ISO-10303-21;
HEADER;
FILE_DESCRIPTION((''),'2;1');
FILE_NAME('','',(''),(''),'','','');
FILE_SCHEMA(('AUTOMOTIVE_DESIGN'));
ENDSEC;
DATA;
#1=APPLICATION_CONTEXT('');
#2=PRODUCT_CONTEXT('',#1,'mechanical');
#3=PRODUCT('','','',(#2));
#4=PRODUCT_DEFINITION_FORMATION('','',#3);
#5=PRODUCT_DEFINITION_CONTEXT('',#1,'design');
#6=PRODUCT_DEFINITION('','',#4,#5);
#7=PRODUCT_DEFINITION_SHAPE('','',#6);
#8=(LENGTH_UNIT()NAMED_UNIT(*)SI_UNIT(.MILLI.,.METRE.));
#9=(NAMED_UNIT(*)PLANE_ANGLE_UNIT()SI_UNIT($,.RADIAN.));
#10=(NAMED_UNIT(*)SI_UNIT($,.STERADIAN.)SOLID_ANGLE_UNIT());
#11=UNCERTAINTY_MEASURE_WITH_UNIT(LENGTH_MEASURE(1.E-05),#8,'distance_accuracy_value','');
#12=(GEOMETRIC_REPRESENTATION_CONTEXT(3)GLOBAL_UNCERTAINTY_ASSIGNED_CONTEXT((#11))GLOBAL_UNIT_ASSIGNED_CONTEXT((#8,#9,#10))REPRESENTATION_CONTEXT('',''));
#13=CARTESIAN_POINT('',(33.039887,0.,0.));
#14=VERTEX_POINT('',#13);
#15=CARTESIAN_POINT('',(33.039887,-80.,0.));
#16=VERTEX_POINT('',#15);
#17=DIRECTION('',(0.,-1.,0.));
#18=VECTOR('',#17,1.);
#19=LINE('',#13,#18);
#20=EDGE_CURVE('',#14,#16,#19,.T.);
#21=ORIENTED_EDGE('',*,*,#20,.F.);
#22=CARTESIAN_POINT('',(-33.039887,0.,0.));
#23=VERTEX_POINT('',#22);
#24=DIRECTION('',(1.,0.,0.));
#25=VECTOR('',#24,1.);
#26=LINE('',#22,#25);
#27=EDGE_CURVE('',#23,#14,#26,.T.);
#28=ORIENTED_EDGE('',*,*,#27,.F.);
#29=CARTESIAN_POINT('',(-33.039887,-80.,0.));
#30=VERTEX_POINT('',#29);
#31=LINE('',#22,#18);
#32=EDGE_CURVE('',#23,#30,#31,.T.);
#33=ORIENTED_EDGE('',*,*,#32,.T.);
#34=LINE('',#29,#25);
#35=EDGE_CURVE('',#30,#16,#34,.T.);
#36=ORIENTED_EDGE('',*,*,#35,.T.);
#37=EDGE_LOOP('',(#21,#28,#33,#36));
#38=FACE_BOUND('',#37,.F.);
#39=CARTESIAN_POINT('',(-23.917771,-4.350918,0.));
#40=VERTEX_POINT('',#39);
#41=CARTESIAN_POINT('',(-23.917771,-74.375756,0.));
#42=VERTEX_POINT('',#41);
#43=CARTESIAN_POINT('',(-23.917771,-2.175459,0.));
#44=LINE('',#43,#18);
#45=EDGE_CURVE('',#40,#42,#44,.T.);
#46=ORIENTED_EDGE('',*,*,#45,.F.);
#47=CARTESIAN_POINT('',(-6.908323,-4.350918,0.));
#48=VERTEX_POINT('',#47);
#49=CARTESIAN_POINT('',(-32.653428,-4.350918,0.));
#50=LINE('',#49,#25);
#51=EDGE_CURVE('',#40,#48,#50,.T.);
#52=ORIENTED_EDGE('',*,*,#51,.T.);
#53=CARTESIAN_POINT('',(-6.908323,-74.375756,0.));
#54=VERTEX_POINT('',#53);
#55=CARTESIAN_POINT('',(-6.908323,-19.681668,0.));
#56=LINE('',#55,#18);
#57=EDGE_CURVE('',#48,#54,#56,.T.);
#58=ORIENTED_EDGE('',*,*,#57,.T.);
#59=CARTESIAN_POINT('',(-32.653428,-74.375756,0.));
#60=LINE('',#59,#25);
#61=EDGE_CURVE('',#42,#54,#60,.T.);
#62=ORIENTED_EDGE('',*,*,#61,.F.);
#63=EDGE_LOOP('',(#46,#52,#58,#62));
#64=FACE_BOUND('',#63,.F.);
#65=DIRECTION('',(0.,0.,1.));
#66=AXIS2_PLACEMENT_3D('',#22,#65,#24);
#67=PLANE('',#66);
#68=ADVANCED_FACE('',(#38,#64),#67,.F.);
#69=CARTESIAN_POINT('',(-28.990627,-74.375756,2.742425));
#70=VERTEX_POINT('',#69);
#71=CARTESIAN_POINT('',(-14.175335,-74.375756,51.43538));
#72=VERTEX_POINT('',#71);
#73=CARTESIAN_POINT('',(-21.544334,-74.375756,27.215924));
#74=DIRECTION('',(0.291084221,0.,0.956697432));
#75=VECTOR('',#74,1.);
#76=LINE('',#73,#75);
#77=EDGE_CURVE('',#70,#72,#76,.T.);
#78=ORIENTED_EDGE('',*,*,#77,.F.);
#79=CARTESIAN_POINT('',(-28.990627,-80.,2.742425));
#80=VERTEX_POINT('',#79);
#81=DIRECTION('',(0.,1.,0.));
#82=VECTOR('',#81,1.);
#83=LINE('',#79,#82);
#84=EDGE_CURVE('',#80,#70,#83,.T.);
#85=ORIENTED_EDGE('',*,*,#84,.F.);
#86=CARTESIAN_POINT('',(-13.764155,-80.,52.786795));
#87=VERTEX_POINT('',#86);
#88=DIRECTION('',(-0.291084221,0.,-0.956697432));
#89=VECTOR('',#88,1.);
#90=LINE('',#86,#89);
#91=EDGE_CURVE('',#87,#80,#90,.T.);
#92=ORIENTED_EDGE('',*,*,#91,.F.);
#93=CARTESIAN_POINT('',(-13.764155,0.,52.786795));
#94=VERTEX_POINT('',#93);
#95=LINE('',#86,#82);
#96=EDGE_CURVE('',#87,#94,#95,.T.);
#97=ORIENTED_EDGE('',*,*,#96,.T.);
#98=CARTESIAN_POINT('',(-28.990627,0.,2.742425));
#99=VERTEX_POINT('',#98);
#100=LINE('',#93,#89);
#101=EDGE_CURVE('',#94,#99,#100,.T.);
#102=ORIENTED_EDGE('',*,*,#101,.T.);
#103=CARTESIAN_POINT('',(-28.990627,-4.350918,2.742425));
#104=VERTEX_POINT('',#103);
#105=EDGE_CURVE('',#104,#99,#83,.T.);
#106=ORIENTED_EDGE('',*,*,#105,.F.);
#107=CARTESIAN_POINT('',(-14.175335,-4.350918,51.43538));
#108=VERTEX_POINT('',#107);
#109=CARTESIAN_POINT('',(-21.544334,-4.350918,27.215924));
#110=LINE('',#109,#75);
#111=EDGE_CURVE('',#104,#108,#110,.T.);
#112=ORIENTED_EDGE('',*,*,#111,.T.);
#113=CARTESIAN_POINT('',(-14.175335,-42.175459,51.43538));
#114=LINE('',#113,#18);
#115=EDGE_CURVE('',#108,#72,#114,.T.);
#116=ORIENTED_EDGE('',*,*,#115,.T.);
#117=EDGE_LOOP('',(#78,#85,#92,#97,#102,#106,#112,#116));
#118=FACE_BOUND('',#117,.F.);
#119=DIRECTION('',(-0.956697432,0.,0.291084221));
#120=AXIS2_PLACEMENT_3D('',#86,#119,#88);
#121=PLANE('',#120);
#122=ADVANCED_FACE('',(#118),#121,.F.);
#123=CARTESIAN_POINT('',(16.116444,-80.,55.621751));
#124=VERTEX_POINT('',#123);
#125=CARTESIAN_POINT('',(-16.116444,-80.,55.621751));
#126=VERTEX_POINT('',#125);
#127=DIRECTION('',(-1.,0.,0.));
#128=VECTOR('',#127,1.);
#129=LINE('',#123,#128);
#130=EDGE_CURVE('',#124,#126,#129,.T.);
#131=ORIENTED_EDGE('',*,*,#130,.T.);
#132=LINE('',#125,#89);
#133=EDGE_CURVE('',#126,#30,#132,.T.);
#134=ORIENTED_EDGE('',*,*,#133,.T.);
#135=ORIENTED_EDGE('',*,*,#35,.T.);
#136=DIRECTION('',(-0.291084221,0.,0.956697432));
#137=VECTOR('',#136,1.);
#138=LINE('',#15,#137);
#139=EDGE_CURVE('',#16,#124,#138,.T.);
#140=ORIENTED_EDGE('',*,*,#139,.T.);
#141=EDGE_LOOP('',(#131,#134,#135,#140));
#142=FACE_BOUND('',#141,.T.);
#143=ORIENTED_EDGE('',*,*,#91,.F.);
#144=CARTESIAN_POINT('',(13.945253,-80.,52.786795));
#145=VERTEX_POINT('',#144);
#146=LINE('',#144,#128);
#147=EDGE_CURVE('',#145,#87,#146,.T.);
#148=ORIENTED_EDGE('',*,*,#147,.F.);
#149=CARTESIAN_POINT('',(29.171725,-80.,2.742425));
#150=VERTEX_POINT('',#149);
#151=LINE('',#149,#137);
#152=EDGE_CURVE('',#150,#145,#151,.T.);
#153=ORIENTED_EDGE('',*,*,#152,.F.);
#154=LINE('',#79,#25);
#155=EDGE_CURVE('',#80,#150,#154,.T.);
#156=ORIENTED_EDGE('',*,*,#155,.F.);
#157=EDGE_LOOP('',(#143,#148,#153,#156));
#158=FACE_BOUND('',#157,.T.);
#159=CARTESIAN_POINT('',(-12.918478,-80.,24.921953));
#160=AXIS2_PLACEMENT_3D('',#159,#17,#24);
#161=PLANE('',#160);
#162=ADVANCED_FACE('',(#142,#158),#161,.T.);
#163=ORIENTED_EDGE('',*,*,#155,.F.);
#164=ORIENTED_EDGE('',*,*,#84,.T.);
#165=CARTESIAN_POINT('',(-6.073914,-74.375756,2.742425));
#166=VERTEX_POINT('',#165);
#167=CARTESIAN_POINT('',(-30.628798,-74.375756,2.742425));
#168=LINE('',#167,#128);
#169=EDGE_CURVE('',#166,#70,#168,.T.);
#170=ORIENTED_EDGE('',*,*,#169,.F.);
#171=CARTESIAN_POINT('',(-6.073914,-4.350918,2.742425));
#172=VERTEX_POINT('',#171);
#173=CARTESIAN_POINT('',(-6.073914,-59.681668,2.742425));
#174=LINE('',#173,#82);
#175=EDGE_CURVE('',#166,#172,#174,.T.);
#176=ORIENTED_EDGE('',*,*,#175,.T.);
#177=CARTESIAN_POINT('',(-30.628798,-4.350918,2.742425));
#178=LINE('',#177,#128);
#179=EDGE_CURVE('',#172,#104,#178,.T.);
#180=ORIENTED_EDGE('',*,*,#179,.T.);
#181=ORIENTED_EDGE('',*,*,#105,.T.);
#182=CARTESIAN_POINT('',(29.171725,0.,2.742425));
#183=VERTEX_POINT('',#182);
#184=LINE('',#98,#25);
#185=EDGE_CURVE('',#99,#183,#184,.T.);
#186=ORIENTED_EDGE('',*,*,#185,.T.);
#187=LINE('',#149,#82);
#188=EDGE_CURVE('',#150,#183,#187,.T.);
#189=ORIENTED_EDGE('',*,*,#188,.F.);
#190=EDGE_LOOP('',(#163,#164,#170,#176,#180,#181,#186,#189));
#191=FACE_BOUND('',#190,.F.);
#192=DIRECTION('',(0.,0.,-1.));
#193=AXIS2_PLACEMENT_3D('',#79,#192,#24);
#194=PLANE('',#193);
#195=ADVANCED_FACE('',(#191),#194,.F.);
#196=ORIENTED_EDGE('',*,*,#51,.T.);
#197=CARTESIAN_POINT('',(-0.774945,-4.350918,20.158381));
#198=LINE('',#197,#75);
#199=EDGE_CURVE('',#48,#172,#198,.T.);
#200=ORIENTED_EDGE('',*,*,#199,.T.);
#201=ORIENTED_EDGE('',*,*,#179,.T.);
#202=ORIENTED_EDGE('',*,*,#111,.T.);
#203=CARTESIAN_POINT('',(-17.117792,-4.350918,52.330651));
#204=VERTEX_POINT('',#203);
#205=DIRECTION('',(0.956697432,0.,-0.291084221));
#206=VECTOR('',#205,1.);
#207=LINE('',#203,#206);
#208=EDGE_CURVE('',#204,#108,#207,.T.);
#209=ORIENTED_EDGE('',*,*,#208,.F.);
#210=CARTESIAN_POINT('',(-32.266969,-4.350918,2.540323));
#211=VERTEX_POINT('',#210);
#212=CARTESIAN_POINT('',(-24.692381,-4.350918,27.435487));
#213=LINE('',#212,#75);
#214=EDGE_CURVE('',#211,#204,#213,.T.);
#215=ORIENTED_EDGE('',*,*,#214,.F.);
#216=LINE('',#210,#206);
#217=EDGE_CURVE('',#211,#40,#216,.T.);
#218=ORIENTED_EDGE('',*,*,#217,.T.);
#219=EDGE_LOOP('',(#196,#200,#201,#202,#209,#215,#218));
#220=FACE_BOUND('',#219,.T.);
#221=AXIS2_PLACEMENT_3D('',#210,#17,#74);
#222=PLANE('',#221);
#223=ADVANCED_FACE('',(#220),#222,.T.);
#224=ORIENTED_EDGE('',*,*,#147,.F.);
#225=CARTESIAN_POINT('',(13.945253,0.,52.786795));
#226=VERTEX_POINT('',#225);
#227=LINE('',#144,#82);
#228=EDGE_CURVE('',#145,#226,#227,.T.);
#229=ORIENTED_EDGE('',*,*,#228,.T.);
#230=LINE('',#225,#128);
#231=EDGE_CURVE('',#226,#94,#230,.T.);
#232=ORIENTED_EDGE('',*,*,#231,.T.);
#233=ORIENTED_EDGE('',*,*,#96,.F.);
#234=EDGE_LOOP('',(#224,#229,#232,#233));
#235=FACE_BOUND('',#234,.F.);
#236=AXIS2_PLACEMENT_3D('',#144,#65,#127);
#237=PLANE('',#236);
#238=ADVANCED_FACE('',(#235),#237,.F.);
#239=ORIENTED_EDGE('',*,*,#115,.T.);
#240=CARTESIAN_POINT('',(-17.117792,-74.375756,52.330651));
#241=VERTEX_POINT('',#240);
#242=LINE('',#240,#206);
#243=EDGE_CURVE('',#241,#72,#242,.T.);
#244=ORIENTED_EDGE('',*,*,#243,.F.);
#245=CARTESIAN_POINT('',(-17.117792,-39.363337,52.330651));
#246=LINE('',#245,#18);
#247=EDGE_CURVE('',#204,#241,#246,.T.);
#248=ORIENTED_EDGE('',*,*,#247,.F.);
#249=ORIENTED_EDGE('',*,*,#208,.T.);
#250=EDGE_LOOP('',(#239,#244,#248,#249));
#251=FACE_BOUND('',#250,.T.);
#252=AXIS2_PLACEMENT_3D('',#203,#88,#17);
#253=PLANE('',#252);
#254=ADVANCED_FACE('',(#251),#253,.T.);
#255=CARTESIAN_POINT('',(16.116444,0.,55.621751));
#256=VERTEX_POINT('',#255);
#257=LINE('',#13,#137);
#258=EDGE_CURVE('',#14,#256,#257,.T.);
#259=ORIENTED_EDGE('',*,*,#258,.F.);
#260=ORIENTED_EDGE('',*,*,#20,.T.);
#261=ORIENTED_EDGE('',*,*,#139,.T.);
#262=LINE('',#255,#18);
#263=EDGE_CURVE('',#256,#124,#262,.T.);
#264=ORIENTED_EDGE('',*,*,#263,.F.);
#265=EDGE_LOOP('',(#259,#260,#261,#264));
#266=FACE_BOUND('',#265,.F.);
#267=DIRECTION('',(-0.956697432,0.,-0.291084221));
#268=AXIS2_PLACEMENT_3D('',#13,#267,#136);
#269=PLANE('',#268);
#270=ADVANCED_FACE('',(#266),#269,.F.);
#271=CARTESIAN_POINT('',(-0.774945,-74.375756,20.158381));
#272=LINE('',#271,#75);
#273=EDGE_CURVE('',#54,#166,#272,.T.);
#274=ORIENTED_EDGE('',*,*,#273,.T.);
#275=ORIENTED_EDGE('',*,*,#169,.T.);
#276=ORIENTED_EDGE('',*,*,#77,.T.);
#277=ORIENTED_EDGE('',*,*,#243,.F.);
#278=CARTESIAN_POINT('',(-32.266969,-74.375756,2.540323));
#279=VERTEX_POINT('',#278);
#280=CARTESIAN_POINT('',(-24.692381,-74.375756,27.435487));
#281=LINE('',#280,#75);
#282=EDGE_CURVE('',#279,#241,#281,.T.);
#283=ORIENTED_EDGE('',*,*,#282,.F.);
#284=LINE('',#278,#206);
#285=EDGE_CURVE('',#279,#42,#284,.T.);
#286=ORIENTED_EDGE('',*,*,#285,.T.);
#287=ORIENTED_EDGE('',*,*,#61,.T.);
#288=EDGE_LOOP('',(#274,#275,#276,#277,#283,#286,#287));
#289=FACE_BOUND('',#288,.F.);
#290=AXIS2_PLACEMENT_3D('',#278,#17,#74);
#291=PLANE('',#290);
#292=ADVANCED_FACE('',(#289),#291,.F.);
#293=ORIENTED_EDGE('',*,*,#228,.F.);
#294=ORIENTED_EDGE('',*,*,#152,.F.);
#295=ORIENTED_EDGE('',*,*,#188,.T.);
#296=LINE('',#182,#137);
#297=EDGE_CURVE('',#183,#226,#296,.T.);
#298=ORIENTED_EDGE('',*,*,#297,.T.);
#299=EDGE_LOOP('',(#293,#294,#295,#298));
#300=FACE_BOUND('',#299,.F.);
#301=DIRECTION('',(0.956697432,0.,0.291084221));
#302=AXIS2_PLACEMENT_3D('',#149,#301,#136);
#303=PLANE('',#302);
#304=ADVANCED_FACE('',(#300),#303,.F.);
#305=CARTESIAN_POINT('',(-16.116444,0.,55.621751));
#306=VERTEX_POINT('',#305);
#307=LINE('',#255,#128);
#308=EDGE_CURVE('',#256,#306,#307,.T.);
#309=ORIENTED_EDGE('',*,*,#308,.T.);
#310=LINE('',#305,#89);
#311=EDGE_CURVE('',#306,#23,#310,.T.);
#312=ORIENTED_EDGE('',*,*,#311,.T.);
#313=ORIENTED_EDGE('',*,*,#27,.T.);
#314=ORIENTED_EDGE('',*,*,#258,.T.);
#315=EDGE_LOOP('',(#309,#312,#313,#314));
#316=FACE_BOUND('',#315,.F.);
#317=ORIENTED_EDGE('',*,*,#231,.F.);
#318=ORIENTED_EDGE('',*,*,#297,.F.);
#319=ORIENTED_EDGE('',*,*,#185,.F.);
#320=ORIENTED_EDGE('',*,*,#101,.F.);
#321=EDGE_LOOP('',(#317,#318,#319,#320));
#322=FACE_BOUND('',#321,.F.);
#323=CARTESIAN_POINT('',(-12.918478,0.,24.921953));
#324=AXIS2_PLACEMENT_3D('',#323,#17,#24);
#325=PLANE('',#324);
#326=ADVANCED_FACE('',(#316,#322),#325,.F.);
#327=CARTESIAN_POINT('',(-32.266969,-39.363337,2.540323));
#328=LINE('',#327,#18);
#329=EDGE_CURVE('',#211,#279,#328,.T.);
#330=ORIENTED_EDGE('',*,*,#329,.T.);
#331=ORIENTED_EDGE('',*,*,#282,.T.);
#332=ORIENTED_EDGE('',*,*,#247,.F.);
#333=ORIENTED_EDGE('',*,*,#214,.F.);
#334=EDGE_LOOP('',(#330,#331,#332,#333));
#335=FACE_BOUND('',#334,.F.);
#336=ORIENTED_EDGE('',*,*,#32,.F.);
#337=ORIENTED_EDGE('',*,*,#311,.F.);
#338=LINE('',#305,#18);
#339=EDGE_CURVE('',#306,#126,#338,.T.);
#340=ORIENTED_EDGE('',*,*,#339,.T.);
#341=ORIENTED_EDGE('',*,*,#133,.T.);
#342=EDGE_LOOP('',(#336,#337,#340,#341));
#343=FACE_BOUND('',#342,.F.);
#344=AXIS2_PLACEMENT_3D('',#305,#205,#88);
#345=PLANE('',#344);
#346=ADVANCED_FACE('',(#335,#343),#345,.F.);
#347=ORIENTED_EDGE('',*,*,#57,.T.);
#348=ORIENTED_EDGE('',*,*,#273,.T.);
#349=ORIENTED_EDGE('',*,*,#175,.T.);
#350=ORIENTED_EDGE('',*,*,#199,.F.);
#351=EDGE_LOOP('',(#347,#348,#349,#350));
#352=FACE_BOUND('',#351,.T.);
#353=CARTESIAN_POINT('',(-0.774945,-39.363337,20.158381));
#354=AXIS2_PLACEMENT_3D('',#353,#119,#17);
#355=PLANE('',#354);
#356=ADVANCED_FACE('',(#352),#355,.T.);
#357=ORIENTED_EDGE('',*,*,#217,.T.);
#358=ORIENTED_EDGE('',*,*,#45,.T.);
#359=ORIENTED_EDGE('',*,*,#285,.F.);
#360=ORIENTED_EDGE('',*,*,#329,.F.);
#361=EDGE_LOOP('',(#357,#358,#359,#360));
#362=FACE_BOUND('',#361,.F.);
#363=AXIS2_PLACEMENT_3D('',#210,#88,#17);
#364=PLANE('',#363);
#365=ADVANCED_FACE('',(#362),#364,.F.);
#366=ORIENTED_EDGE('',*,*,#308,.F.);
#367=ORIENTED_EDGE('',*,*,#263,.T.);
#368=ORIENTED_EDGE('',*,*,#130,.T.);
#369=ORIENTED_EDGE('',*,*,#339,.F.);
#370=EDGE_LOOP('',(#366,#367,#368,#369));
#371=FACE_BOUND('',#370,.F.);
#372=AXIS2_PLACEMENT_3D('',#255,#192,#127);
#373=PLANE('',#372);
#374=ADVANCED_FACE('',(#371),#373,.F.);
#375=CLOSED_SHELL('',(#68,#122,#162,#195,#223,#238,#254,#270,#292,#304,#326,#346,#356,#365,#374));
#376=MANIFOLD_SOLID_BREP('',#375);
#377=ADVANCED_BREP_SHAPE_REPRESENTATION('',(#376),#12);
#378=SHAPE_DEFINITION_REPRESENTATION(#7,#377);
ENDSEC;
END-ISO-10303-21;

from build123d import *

# Parameters (mm, degrees)
F1_DEPTH = 80
F3_DEPTH = 80
F4_W     = 70.0248382054
F4_H     = 52.043965552
F5_DEPTH = 25


with BuildPart() as f1:
    # F0 (on Front) → F1 (new body)
    with BuildSketch(Plane.XZ):
        Polygon((-16.1164440215, 55.6217506528), (-33.0398865044, 0), (0, 0), (0, 55.6217506528), align=None)
        Polygon((0, 55.6217506528), (0, 0), (33.0398865044, 0), (16.1164440215, 55.6217506528), align=None)
    extrude(amount=F1_DEPTH)

    # F2 (on face) → F3 (cut)
    with BuildSketch(Plane.XZ.offset(80)):
        Polygon((-13.7641547164, 52.7867953574), (-28.990626716, 2.7424246723), (29.1717245215, 2.7424246723), (13.9452525218, 52.7867953574), align=None)
    extrude(amount=-F3_DEPTH, mode=Mode.SUBTRACT)

    # F4 (on face) → F5 (cut)
    with BuildSketch(Plane(origin=(-30.2404161362, 0, 9.200931958), x_dir=(0, -1, 0), z_dir=(-0.9566974319, 0, 0.2910842211))):
        with Locations((39.3633369822, 19.0598971676)):
            Rectangle(F4_W, F4_H)
    extrude(amount=-F5_DEPTH, mode=Mode.SUBTRACT)


solid = f1.part
